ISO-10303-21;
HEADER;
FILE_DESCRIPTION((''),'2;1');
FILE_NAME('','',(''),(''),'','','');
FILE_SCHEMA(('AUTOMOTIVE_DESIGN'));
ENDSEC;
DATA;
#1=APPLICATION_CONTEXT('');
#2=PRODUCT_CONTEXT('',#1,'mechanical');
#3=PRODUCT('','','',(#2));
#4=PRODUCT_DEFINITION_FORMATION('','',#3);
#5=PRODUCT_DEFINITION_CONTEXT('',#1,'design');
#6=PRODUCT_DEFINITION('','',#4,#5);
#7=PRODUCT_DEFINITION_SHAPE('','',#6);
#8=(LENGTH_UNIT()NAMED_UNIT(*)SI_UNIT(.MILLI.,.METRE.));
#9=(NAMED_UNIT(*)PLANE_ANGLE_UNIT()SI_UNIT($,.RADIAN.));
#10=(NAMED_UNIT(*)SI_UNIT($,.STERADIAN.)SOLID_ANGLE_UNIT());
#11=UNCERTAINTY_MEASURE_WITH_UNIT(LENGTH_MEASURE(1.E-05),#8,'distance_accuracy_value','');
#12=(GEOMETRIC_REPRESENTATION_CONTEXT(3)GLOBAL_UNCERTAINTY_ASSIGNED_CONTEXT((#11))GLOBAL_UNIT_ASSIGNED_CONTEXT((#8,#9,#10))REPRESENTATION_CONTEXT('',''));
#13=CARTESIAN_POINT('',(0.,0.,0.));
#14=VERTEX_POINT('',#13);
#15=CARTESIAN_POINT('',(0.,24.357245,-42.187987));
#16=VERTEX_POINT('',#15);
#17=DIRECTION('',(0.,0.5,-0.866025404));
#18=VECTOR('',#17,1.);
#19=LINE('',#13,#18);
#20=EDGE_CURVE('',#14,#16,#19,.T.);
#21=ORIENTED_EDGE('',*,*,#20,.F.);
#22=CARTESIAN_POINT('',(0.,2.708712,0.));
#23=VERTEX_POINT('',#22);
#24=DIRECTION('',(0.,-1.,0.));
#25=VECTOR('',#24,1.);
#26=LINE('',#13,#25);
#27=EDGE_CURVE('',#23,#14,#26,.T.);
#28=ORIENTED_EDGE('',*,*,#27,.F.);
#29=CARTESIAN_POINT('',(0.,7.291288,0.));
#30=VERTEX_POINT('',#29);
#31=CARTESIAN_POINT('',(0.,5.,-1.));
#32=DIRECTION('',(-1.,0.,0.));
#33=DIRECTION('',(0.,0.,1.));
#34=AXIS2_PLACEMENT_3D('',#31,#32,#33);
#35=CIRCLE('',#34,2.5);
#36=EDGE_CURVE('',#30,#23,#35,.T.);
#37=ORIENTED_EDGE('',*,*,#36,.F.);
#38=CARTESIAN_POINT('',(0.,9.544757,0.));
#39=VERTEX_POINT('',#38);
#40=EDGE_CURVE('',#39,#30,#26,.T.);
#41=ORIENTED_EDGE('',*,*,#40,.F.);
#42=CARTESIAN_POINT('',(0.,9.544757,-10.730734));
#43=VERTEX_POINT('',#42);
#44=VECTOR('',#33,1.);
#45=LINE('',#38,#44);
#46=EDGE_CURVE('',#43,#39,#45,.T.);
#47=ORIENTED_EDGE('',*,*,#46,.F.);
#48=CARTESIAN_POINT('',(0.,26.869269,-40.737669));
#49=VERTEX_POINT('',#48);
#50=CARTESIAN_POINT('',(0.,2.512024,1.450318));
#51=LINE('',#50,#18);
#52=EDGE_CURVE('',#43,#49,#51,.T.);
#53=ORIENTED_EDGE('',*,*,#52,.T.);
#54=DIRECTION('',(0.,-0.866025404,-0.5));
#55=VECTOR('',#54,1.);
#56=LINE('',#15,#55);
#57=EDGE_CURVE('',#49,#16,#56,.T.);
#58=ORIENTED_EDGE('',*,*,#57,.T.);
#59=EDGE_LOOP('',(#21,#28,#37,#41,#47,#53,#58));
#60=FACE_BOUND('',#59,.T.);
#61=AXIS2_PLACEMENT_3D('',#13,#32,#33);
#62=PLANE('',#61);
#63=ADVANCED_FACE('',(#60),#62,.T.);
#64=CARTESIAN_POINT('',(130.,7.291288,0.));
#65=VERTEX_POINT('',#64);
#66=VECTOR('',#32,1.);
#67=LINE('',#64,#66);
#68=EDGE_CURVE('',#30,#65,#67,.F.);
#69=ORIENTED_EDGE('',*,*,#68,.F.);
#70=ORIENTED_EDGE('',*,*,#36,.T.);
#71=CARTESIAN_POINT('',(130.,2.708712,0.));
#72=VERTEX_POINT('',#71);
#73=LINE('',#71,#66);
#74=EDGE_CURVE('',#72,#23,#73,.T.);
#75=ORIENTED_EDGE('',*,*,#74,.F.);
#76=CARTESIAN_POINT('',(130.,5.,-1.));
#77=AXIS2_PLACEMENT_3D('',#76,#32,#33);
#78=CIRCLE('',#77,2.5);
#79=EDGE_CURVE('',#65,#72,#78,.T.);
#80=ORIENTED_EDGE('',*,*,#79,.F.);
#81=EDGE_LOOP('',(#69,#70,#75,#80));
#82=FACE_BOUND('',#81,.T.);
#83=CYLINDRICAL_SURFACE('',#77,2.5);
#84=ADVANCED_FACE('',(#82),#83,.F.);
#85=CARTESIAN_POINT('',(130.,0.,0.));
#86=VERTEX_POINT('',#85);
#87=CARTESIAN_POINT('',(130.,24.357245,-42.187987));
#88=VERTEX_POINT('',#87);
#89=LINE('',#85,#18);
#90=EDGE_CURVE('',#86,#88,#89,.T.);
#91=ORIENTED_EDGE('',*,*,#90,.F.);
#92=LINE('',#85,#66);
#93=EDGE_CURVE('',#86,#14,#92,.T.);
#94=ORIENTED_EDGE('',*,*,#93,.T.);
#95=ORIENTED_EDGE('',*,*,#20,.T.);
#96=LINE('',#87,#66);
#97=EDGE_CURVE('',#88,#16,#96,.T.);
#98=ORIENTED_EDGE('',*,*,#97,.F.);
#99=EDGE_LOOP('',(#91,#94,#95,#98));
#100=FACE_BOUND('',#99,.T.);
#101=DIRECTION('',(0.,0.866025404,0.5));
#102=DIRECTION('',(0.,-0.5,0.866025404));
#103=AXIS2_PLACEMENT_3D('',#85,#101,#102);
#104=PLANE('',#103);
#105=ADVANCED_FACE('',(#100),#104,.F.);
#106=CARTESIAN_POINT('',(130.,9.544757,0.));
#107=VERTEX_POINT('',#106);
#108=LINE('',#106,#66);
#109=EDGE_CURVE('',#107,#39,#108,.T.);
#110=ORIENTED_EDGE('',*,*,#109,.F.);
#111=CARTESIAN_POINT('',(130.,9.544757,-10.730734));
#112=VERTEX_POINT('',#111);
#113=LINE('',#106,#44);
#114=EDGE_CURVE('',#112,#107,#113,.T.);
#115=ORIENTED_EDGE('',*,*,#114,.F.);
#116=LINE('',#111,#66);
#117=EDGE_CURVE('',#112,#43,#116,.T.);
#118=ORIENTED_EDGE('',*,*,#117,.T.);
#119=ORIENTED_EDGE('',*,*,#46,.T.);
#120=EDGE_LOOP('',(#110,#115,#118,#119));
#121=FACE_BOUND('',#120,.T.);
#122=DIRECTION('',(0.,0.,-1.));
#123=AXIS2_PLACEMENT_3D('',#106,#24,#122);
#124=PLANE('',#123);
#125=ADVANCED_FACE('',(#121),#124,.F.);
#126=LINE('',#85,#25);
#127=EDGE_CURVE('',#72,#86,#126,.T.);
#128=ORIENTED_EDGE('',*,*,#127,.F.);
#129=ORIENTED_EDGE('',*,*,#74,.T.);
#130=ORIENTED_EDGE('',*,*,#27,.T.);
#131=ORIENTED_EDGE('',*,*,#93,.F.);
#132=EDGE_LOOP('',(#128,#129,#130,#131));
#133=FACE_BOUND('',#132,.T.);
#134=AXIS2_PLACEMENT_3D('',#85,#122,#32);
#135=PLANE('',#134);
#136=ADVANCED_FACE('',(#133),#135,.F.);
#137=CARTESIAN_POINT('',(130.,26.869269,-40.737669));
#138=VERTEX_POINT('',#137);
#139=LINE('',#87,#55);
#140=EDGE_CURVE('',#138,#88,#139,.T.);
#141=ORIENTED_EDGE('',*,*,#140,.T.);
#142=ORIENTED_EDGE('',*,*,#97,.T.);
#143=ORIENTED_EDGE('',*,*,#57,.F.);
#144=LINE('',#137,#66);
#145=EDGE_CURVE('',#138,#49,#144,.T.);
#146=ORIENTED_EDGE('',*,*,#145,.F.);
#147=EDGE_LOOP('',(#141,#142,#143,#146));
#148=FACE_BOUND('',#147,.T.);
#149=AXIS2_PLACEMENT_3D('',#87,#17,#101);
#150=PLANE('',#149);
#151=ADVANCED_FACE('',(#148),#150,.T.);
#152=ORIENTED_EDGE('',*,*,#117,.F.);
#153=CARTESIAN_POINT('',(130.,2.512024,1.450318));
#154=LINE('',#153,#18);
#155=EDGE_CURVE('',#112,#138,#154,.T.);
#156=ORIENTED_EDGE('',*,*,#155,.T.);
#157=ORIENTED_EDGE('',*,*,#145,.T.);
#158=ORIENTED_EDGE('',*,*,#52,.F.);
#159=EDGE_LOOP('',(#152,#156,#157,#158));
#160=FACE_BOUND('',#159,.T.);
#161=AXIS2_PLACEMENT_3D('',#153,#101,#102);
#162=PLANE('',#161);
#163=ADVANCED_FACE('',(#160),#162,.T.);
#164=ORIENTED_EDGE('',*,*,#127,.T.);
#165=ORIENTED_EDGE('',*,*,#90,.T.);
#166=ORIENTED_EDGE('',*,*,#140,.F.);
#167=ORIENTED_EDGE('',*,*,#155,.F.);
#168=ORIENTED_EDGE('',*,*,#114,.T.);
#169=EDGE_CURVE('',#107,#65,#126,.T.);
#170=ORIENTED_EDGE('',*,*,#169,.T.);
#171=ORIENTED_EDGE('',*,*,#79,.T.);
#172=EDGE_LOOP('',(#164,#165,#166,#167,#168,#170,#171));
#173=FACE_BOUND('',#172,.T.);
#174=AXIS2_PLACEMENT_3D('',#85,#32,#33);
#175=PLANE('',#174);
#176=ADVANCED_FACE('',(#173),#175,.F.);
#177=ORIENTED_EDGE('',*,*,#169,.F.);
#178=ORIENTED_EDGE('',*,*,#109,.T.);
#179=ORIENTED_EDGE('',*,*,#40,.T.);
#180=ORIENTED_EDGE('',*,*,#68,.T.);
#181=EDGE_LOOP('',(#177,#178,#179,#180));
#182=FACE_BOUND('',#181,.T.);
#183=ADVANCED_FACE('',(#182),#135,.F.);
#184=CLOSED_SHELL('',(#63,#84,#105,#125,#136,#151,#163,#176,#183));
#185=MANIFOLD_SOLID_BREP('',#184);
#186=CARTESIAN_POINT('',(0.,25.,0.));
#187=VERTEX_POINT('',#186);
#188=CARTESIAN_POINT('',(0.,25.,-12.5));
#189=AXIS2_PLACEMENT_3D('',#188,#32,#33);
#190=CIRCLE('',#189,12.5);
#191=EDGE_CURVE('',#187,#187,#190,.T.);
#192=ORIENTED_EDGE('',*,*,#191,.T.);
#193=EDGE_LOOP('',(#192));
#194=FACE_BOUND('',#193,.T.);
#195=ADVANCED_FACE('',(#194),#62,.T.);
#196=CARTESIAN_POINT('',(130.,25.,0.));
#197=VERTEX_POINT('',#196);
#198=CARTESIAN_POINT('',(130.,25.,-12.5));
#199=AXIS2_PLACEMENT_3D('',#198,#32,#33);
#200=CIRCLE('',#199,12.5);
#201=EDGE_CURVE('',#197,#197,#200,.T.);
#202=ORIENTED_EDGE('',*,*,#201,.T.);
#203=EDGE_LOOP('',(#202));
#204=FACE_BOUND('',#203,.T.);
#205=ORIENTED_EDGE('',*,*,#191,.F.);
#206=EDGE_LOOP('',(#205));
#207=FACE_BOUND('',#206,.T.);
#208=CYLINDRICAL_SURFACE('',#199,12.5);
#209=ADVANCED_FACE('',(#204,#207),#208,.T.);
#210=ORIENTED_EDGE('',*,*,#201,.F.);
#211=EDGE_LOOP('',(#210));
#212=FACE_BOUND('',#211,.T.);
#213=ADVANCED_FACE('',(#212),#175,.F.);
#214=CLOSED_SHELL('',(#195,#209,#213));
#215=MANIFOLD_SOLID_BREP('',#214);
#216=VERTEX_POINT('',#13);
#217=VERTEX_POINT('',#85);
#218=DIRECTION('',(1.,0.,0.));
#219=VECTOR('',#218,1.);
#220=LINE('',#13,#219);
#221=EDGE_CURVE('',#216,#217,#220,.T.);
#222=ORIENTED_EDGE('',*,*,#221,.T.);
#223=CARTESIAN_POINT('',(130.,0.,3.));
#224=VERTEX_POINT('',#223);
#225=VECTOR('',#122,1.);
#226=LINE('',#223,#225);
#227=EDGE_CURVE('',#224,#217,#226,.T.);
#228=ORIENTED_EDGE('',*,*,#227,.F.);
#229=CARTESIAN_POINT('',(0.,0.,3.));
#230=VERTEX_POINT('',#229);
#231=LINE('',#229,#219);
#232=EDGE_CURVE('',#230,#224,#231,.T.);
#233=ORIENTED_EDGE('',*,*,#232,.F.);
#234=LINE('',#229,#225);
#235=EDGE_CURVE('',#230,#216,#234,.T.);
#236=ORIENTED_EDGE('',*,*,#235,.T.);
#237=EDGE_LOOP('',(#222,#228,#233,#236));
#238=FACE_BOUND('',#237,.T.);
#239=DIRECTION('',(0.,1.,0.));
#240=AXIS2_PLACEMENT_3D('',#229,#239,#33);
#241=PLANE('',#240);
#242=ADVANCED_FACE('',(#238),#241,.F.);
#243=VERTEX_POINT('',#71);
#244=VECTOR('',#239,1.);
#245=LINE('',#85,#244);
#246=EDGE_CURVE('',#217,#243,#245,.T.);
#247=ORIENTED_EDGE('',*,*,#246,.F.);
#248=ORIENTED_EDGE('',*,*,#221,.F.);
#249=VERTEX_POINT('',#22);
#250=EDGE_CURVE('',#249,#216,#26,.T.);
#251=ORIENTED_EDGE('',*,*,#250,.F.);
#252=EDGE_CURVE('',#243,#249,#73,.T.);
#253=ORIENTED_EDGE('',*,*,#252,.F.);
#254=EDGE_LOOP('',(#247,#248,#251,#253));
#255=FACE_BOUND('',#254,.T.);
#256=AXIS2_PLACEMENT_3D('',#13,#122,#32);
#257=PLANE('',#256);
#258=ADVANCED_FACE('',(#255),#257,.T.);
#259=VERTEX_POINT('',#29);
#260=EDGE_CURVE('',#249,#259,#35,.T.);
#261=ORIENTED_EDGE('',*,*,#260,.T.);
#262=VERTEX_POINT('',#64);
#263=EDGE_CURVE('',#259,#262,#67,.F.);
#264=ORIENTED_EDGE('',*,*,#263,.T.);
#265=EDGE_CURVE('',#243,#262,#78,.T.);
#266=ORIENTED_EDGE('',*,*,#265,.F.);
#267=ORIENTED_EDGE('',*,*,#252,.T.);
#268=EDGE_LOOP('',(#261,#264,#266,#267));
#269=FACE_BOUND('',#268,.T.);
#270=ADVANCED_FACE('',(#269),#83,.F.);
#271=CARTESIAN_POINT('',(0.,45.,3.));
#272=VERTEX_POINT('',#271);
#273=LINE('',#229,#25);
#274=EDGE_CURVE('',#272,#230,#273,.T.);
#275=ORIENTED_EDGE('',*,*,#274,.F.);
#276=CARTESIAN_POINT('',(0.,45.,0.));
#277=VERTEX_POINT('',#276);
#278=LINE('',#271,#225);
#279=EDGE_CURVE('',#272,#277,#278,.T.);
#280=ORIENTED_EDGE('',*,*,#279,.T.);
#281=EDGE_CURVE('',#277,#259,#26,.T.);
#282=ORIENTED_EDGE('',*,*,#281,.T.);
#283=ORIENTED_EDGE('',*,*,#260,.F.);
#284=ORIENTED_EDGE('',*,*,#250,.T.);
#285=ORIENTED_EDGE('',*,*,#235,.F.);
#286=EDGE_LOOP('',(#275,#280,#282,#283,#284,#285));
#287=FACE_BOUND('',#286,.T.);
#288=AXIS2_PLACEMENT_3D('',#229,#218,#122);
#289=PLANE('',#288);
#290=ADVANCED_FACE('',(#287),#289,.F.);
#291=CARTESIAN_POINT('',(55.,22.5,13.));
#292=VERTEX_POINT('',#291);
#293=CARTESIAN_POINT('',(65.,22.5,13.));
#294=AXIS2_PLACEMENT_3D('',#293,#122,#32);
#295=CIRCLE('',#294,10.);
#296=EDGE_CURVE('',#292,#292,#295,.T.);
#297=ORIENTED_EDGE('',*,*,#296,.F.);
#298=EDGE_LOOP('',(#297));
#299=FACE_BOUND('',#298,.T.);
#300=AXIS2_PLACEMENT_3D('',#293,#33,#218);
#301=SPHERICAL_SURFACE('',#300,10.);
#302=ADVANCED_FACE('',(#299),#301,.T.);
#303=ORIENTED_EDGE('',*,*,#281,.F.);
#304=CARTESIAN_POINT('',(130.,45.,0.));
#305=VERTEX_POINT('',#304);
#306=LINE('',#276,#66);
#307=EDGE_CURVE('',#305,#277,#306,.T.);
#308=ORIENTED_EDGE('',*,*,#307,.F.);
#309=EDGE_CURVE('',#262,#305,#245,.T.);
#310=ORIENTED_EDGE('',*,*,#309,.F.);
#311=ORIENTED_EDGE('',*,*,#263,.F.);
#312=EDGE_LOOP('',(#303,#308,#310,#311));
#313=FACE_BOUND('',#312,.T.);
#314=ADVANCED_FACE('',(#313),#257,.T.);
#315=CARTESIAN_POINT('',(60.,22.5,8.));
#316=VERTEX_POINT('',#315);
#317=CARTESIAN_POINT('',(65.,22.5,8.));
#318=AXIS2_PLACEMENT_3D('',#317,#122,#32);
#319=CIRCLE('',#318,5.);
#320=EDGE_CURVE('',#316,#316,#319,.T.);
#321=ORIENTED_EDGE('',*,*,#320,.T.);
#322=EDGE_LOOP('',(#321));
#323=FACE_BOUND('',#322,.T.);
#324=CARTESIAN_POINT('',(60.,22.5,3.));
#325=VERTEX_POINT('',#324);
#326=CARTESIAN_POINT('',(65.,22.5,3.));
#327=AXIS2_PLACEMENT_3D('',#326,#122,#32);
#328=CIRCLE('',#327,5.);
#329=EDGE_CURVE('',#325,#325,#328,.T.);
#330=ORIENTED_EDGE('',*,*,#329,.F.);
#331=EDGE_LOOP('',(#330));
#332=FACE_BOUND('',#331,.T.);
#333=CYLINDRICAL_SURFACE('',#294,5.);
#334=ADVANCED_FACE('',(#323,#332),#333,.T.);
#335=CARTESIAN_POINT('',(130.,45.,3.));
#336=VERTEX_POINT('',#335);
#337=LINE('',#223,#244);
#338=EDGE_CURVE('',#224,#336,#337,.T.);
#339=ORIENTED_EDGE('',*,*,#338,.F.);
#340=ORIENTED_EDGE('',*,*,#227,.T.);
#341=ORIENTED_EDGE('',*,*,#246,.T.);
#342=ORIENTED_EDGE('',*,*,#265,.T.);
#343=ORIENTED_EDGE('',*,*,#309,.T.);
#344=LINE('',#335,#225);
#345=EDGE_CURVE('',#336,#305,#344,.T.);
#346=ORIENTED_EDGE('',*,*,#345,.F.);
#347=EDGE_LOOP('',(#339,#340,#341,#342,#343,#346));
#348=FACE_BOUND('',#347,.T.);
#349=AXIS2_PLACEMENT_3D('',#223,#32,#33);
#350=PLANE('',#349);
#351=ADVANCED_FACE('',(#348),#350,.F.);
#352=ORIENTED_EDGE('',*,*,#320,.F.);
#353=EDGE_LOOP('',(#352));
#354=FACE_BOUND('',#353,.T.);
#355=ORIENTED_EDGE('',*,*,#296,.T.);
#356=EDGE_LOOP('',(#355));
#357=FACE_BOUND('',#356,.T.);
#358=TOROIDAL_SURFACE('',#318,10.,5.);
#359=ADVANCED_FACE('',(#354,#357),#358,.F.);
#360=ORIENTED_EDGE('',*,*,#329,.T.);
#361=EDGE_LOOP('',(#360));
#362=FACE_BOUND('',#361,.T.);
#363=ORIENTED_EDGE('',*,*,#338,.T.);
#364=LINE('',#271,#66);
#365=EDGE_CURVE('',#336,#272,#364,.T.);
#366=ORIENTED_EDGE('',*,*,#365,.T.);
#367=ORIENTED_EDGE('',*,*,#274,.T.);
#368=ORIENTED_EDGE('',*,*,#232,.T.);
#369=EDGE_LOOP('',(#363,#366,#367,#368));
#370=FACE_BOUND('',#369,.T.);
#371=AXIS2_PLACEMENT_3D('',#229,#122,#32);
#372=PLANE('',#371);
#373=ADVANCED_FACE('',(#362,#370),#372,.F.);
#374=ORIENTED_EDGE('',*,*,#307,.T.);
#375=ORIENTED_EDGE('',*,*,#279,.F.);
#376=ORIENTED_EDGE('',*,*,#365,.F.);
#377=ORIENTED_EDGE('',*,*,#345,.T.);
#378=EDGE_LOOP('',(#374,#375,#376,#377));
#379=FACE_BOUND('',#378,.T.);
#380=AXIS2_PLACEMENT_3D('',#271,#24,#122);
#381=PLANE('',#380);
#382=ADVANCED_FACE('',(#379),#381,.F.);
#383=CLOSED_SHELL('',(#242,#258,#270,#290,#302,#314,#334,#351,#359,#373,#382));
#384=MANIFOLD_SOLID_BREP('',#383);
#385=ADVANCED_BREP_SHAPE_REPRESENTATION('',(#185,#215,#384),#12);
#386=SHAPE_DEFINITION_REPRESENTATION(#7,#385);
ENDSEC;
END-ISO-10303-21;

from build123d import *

# Parameters (mm, degrees)
SKETCH1_W             = 130
SKETCH1_H             = 45
BOSS_EXTRUDE1_DEPTH   = 3
SKETCH3_R             = 10
BOSS_EXTRUDE2_DEPTH   = 20
FILLET1_R             = 10
SKETCH4_R             = 10
SKETCH4_R_2           = 5
CUT_EXTRUDE3_DEPTH    = 10
FILLET2_R             = 5
SKETCH5_R             = 12.5
BOSS_EXTRUDE3_DEPTH   = 130
BOSS_EXTRUDE3_2_DEPTH = 130
SKETCH6_R             = 2.5
CUT_EXTRUDE4_DEPTH    = 130


with BuildPart() as part:
    # Sketch1 → Boss-Extrude1 (new body)
    with BuildSketch(Plane.XY):
        with Locations((65, 22.5)):
            Rectangle(SKETCH1_W, SKETCH1_H)
    extrude(amount=BOSS_EXTRUDE1_DEPTH)

    # Sketch3 → Boss-Extrude2 (add)
    with BuildSketch(Plane.XY.offset(3)):
        with Locations(Location((65, 22.5, 0), (0, 0, 180))):
            Circle(SKETCH3_R)
    extrude(amount=BOSS_EXTRUDE2_DEPTH)

    # Fillet1
    fillet1_edges = [part.edges().sort_by_distance(p)[0] for p in [
        (75, 22.5, 23),
    ]]
    fillet(fillet1_edges, radius=FILLET1_R)

    # Sketch4 → Cut-Extrude3 (cut)
    with BuildSketch(Plane.XY.offset(3)):
        with Locations((65, 22.5)):
            Circle(SKETCH4_R)
        with Locations(Location((65, 22.5, 0), (0, 0, 180))):
            Circle(SKETCH4_R_2, mode=Mode.SUBTRACT)
    extrude(amount=CUT_EXTRUDE3_DEPTH, mode=Mode.SUBTRACT)

    # Fillet2
    fillet2_edges = [part.edges().sort_by_distance(p)[0] for p in [
        (70, 22.5, 13),
    ]]
    fillet(fillet2_edges, radius=FILLET2_R - 0.0001)  # a hair under: the kernel refuses the full size


with BuildPart() as body_2:
    # Sketch5 → Boss-Extrude3 (new body)
    with BuildSketch(Plane.ZY):
        with Locations((-12.5, 25)):
            Circle(SKETCH5_R)
    extrude(amount=-BOSS_EXTRUDE3_DEPTH)


with BuildPart() as body_3:
    # Sketch5 → Boss-Extrude3 2 (new body)
    with BuildSketch(Plane.ZY):
        Polygon((-42.187986713, 24.357245486), (0, 0), (0, 9.544756876), (-10.730733666, 9.544756876), (-18.750000123, 14.174682524), (-40.737669166, 26.869269165), align=None)
    extrude(amount=-BOSS_EXTRUDE3_2_DEPTH)


with BuildPart() as cut_extrude4_tool:
    # Sketch6 → Cut-Extrude4 (new body)
    with BuildSketch(Plane.ZY):
        with Locations((-1, 5)):
            Circle(SKETCH6_R)
    extrude(amount=-CUT_EXTRUDE4_DEPTH)


with BuildPart() as part_1:
    add(part.part)

    # Cut-Extrude4: cut by cut_extrude4_tool
    add(cut_extrude4_tool.part, mode=Mode.SUBTRACT)


with BuildPart() as body_3_1:
    add(body_3.part)

    # Cut-Extrude4: cut by cut_extrude4_tool
    add(cut_extrude4_tool.part, mode=Mode.SUBTRACT)


solid = Compound([body_2.part, part_1.part, body_3_1.part])
